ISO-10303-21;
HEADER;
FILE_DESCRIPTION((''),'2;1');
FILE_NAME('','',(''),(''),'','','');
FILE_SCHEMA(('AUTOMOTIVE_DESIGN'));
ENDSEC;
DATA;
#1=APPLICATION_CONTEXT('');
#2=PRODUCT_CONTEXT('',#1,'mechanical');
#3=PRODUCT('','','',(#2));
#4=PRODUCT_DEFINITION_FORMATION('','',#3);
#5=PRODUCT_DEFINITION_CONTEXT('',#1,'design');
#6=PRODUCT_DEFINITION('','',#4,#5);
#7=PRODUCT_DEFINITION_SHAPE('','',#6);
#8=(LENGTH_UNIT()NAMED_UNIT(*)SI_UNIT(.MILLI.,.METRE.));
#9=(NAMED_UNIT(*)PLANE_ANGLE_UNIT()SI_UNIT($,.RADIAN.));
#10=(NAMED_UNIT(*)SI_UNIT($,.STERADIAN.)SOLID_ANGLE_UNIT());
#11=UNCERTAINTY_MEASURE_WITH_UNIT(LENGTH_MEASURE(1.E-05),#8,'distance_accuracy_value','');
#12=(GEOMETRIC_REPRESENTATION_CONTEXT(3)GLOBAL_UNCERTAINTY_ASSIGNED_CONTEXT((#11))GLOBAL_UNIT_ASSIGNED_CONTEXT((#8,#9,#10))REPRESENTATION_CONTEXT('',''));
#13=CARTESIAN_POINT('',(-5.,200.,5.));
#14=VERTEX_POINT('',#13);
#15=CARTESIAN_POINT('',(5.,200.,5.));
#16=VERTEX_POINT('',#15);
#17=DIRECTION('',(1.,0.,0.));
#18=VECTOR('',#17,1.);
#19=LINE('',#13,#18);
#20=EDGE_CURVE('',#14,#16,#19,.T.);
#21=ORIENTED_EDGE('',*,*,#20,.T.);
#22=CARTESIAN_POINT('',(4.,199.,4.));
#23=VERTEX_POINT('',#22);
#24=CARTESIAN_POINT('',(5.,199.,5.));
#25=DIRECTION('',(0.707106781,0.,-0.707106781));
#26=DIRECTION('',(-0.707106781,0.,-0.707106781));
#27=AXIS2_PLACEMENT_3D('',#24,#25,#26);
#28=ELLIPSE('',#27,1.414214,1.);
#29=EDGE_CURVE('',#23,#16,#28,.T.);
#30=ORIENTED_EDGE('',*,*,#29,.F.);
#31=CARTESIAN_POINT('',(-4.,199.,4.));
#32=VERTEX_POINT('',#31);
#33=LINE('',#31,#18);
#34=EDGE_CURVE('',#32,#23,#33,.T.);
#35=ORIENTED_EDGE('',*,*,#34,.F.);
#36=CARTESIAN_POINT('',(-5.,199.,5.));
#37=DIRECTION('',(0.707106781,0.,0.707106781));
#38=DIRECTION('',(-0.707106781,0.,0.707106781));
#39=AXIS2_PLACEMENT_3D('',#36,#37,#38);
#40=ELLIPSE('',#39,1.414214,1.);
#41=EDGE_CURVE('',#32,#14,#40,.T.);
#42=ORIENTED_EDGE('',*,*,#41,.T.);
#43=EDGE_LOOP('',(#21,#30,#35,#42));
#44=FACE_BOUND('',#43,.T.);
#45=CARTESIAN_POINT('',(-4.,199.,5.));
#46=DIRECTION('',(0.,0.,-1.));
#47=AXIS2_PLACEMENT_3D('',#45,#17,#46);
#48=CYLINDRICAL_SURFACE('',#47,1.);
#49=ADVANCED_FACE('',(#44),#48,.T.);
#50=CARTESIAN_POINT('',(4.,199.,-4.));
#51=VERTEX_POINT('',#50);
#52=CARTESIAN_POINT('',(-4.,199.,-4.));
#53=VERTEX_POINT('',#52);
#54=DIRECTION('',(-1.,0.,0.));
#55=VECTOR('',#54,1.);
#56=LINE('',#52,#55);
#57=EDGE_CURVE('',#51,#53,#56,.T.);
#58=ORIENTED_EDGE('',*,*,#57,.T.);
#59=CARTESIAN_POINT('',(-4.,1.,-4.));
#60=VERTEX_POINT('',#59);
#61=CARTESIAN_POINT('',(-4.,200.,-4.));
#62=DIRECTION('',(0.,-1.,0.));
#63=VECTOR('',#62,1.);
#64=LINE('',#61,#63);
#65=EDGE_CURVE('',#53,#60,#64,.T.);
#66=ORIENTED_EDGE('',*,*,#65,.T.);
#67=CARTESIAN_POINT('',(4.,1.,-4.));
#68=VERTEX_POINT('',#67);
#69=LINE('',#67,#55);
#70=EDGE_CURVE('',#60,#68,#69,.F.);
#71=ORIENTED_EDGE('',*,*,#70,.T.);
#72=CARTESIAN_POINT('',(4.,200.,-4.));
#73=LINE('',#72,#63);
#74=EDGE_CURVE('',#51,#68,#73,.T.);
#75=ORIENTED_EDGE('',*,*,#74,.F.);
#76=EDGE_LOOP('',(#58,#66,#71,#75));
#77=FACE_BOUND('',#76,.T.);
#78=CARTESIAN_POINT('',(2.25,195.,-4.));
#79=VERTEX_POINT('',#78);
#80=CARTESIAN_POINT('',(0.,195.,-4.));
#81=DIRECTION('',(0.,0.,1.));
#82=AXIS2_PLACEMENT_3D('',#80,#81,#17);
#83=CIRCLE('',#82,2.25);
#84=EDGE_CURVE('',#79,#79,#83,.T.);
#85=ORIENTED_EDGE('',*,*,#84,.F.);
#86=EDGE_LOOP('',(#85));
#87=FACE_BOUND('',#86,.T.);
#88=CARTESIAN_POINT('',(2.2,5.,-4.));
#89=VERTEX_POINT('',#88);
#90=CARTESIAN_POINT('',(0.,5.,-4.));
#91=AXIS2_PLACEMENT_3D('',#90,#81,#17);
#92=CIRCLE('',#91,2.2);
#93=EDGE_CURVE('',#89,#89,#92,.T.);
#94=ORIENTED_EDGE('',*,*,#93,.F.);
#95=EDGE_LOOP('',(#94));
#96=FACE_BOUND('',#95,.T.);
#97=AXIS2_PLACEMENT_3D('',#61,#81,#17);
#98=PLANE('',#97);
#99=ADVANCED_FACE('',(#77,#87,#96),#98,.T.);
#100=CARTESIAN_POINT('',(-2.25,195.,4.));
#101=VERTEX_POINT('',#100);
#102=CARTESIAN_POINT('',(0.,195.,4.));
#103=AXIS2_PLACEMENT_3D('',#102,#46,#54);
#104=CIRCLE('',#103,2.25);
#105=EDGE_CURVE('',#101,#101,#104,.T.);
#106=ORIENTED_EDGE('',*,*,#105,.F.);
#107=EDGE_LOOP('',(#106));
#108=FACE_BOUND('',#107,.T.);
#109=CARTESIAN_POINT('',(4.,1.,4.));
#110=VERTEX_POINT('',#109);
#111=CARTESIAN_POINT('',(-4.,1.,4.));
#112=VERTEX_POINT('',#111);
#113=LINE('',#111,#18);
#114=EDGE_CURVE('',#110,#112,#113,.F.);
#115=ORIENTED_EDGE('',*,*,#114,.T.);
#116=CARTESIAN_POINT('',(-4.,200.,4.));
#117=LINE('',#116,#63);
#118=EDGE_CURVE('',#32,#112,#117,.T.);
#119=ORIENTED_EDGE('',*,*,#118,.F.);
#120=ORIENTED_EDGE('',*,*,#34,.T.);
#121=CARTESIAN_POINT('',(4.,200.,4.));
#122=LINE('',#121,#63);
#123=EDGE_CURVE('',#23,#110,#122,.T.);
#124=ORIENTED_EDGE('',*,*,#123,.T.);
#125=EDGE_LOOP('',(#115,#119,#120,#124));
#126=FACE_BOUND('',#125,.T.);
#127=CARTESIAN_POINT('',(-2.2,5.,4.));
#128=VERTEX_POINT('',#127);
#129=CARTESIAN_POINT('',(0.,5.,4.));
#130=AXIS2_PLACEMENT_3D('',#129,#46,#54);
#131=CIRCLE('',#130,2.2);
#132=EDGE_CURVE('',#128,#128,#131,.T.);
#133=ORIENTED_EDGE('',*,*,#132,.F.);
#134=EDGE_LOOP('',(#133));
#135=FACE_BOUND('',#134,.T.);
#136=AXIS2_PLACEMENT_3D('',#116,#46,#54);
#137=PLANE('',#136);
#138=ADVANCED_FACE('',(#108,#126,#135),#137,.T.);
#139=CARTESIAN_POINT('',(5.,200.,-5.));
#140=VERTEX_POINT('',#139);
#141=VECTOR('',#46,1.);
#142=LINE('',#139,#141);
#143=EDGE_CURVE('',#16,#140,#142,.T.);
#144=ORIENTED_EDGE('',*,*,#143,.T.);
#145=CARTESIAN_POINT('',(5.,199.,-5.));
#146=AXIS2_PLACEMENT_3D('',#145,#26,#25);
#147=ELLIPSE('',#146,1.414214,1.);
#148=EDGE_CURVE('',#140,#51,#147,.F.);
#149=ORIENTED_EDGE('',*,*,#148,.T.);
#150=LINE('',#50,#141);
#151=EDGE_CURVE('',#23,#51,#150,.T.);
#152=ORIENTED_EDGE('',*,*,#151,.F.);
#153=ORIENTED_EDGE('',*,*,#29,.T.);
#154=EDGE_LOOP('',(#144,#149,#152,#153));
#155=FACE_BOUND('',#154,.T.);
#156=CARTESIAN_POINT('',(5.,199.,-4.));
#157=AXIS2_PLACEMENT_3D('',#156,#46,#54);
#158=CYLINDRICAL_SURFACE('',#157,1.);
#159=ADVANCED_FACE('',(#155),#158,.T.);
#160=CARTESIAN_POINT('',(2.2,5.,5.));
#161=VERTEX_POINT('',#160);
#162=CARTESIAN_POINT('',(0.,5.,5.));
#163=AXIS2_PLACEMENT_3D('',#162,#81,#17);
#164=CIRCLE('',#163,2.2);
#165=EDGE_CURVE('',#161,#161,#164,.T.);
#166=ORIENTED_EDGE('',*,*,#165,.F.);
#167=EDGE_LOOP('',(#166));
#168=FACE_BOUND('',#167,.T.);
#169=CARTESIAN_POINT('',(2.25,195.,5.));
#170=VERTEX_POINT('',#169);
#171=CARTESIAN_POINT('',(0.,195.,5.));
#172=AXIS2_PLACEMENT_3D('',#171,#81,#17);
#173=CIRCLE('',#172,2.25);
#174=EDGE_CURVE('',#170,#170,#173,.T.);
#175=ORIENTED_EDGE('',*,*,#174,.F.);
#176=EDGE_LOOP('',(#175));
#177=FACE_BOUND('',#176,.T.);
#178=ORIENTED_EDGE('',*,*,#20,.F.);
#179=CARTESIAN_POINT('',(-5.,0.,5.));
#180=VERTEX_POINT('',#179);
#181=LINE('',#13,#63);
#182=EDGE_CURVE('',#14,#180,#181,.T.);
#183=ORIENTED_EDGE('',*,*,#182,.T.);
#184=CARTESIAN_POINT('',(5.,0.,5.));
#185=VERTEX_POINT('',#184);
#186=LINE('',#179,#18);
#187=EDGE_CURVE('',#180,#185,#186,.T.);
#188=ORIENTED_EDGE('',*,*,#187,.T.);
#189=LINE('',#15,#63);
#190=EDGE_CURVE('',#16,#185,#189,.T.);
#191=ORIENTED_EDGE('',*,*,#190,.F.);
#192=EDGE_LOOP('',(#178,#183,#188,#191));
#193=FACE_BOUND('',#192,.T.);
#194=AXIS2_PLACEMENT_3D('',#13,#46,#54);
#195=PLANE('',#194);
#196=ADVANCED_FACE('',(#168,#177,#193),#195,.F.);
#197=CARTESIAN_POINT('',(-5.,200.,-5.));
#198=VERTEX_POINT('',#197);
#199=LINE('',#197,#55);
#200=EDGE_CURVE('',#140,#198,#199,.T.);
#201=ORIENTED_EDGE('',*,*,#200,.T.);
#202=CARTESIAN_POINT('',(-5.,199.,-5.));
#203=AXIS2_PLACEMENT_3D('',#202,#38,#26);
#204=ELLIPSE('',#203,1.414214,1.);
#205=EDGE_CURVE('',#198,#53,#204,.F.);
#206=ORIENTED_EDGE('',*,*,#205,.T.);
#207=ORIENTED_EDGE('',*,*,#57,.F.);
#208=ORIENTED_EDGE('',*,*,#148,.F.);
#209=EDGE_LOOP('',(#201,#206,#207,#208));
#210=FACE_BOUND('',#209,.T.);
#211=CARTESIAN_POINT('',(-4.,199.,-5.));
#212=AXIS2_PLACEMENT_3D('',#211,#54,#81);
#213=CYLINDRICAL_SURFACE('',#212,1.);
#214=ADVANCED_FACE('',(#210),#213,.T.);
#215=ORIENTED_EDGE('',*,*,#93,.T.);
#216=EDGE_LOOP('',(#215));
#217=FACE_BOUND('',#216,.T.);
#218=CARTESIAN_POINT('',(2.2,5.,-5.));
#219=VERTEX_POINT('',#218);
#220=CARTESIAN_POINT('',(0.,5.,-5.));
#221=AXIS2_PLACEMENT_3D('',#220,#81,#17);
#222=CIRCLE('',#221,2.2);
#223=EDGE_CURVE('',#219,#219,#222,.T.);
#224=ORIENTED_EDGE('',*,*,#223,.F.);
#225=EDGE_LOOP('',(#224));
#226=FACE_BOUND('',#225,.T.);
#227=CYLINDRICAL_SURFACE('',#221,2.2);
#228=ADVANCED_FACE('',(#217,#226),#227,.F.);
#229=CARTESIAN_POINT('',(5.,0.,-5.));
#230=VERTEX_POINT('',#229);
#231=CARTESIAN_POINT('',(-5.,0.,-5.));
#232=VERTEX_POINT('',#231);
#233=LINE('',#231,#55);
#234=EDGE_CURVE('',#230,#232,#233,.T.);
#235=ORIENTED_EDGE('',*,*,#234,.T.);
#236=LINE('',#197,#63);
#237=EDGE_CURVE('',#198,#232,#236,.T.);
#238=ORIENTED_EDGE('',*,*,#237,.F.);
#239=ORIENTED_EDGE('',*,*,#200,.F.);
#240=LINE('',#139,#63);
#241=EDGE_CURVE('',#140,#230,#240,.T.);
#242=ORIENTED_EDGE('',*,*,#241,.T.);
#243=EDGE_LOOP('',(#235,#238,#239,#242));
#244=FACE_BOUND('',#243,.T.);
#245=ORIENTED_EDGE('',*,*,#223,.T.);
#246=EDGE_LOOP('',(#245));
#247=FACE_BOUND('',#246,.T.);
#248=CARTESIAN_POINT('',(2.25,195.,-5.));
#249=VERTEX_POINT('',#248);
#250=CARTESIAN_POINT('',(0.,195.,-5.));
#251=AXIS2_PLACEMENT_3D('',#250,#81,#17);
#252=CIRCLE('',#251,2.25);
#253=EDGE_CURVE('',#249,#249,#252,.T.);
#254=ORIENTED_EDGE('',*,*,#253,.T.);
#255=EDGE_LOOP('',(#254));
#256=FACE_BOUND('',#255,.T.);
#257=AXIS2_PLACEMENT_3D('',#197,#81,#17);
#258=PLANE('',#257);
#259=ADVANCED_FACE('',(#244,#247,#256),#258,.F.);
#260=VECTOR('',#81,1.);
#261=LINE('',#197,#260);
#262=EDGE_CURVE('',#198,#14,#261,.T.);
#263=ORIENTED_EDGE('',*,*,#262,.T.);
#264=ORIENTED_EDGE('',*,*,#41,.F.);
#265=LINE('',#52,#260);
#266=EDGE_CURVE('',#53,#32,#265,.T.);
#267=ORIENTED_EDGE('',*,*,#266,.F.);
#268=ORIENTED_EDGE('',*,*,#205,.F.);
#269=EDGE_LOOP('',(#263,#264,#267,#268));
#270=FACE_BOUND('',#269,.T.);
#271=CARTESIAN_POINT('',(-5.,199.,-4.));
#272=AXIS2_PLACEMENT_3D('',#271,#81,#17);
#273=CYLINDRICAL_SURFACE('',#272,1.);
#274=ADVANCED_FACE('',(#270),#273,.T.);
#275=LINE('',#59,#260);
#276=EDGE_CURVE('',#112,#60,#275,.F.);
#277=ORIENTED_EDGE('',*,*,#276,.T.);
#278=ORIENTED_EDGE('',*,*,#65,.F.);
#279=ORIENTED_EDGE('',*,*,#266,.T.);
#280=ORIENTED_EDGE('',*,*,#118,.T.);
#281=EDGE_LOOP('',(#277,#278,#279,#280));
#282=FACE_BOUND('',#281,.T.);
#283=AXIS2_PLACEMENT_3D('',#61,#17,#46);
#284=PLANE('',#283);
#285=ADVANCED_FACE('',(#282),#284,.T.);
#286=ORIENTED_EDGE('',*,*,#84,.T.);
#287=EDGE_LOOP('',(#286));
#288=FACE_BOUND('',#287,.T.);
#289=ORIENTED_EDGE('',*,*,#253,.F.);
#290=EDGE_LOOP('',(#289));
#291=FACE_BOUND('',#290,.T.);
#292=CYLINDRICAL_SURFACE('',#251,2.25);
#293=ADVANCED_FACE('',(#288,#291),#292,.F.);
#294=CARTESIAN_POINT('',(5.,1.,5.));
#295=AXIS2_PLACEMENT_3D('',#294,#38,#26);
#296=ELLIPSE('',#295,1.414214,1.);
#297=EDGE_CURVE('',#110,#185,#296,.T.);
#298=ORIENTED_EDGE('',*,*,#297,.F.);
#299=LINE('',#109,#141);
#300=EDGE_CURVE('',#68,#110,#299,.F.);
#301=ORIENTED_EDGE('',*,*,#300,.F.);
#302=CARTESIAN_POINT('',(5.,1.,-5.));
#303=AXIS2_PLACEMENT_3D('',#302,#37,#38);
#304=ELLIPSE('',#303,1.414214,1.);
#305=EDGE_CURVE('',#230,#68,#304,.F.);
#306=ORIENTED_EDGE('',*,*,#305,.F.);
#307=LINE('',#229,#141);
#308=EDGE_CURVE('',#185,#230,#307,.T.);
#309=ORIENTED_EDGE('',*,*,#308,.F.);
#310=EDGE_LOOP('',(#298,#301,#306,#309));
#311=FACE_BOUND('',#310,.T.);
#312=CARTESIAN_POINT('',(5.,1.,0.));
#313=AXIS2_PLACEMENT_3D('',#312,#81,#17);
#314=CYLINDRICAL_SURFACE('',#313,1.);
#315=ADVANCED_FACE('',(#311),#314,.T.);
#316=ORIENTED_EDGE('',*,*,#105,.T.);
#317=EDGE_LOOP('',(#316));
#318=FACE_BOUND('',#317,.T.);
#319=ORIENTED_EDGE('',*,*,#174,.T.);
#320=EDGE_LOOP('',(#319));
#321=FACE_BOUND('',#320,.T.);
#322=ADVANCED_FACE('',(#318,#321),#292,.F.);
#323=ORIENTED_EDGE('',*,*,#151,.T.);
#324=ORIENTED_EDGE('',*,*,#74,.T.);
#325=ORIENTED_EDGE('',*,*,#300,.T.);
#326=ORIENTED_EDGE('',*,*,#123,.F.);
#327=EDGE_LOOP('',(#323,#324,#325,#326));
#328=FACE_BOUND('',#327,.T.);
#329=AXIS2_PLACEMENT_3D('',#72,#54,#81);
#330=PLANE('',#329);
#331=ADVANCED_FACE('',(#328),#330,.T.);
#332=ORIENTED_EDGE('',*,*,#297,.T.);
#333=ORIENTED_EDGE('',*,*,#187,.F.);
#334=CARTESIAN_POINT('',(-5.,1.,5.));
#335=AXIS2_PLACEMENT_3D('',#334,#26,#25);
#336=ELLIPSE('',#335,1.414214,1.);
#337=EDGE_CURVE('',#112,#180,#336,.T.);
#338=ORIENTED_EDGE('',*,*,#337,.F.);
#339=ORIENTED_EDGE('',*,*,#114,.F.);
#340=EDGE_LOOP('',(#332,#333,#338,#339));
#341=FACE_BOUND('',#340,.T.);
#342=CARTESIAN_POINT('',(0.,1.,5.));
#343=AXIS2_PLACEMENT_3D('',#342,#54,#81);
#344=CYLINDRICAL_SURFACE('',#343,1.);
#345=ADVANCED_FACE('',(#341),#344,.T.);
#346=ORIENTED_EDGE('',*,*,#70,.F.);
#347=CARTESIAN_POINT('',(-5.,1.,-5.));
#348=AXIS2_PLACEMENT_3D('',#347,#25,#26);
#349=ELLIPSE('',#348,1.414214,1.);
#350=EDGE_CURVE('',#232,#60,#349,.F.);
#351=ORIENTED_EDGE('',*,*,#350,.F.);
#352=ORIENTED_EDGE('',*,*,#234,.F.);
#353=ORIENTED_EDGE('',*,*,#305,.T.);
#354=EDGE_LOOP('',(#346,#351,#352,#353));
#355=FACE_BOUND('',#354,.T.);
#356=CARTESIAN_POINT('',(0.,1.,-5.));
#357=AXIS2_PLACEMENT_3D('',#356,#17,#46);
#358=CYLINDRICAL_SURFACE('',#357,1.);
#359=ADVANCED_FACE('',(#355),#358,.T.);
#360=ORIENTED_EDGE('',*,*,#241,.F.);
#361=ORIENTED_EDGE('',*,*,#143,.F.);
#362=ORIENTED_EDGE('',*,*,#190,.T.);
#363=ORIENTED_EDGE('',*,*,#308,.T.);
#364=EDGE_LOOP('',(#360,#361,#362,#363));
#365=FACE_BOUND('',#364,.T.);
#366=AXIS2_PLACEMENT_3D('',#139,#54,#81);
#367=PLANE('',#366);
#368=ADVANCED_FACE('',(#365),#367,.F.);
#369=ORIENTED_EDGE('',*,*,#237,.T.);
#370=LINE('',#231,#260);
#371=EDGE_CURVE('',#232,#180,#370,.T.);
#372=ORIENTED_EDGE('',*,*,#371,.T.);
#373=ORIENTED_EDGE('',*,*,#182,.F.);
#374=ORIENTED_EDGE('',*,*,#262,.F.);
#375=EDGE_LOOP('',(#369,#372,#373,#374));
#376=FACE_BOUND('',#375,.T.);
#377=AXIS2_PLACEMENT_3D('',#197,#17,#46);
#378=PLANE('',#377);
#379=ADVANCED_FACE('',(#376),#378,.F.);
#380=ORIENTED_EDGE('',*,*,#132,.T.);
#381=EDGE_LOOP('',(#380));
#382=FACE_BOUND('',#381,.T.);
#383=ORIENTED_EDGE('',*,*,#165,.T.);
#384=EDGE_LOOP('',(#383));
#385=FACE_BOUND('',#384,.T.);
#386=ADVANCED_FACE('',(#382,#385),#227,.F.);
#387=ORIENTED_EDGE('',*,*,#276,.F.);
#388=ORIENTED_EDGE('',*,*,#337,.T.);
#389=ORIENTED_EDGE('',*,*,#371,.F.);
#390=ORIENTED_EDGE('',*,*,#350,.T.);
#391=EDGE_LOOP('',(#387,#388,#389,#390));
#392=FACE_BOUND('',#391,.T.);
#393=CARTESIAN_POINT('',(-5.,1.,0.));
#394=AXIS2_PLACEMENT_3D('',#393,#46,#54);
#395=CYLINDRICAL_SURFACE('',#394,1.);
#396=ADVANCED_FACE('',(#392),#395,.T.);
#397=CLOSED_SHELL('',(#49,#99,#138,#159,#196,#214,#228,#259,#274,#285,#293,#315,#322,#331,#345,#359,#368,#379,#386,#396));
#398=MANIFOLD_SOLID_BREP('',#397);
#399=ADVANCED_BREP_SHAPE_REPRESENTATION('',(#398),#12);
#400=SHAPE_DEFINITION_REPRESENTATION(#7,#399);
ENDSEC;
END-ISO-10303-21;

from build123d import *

# Parameters (mm, degrees)
SKETCH1_W           = 10
SKETCH1_H           = 10
SKETCH1_W_2         = 8
SKETCH1_H_2         = 8
BOSS_EXTRUDE1_DEPTH = 200
FILLET2_R           = 1
SKETCH2_R           = 2.2
SKETCH2_R_2         = 2.25
CUT_EXTRUDE1_DEPTH  = 201.31225624


with BuildPart() as part:
    # Sketch1 → Boss-Extrude1 (new body)
    with BuildSketch(Plane(origin=(0, 0, 0), x_dir=(1, 0, 0), z_dir=(0, 1, 0))):
        Rectangle(SKETCH1_W, SKETCH1_H)
        Rectangle(SKETCH1_W_2, SKETCH1_H_2, mode=Mode.SUBTRACT)
    extrude(amount=BOSS_EXTRUDE1_DEPTH)

    # Fillet2
    fillet2_edges = [part.edges().sort_by_distance(p)[0] for p in [
        (4, 0, 0),
        (0, 0, -4),
        (-4, 0, 0),
        (0, 0, 4),
        (4, 200, 0),
        (0, 200, -4),
        (-4, 200, 0),
        (0, 200, 4),
    ]]
    fillet(fillet2_edges, radius=FILLET2_R - 0.0001)  # a hair under: the kernel refuses the full size

    # Sketch2 → Cut-Extrude1 (cut, through all)
    with BuildSketch(Plane.XY.offset(5)):
        with Locations((0, 5)):
            Circle(SKETCH2_R)
        with Locations((0, 195)):
            Circle(SKETCH2_R_2)
    extrude(amount=-CUT_EXTRUDE1_DEPTH, mode=Mode.SUBTRACT)


solid = part.part
